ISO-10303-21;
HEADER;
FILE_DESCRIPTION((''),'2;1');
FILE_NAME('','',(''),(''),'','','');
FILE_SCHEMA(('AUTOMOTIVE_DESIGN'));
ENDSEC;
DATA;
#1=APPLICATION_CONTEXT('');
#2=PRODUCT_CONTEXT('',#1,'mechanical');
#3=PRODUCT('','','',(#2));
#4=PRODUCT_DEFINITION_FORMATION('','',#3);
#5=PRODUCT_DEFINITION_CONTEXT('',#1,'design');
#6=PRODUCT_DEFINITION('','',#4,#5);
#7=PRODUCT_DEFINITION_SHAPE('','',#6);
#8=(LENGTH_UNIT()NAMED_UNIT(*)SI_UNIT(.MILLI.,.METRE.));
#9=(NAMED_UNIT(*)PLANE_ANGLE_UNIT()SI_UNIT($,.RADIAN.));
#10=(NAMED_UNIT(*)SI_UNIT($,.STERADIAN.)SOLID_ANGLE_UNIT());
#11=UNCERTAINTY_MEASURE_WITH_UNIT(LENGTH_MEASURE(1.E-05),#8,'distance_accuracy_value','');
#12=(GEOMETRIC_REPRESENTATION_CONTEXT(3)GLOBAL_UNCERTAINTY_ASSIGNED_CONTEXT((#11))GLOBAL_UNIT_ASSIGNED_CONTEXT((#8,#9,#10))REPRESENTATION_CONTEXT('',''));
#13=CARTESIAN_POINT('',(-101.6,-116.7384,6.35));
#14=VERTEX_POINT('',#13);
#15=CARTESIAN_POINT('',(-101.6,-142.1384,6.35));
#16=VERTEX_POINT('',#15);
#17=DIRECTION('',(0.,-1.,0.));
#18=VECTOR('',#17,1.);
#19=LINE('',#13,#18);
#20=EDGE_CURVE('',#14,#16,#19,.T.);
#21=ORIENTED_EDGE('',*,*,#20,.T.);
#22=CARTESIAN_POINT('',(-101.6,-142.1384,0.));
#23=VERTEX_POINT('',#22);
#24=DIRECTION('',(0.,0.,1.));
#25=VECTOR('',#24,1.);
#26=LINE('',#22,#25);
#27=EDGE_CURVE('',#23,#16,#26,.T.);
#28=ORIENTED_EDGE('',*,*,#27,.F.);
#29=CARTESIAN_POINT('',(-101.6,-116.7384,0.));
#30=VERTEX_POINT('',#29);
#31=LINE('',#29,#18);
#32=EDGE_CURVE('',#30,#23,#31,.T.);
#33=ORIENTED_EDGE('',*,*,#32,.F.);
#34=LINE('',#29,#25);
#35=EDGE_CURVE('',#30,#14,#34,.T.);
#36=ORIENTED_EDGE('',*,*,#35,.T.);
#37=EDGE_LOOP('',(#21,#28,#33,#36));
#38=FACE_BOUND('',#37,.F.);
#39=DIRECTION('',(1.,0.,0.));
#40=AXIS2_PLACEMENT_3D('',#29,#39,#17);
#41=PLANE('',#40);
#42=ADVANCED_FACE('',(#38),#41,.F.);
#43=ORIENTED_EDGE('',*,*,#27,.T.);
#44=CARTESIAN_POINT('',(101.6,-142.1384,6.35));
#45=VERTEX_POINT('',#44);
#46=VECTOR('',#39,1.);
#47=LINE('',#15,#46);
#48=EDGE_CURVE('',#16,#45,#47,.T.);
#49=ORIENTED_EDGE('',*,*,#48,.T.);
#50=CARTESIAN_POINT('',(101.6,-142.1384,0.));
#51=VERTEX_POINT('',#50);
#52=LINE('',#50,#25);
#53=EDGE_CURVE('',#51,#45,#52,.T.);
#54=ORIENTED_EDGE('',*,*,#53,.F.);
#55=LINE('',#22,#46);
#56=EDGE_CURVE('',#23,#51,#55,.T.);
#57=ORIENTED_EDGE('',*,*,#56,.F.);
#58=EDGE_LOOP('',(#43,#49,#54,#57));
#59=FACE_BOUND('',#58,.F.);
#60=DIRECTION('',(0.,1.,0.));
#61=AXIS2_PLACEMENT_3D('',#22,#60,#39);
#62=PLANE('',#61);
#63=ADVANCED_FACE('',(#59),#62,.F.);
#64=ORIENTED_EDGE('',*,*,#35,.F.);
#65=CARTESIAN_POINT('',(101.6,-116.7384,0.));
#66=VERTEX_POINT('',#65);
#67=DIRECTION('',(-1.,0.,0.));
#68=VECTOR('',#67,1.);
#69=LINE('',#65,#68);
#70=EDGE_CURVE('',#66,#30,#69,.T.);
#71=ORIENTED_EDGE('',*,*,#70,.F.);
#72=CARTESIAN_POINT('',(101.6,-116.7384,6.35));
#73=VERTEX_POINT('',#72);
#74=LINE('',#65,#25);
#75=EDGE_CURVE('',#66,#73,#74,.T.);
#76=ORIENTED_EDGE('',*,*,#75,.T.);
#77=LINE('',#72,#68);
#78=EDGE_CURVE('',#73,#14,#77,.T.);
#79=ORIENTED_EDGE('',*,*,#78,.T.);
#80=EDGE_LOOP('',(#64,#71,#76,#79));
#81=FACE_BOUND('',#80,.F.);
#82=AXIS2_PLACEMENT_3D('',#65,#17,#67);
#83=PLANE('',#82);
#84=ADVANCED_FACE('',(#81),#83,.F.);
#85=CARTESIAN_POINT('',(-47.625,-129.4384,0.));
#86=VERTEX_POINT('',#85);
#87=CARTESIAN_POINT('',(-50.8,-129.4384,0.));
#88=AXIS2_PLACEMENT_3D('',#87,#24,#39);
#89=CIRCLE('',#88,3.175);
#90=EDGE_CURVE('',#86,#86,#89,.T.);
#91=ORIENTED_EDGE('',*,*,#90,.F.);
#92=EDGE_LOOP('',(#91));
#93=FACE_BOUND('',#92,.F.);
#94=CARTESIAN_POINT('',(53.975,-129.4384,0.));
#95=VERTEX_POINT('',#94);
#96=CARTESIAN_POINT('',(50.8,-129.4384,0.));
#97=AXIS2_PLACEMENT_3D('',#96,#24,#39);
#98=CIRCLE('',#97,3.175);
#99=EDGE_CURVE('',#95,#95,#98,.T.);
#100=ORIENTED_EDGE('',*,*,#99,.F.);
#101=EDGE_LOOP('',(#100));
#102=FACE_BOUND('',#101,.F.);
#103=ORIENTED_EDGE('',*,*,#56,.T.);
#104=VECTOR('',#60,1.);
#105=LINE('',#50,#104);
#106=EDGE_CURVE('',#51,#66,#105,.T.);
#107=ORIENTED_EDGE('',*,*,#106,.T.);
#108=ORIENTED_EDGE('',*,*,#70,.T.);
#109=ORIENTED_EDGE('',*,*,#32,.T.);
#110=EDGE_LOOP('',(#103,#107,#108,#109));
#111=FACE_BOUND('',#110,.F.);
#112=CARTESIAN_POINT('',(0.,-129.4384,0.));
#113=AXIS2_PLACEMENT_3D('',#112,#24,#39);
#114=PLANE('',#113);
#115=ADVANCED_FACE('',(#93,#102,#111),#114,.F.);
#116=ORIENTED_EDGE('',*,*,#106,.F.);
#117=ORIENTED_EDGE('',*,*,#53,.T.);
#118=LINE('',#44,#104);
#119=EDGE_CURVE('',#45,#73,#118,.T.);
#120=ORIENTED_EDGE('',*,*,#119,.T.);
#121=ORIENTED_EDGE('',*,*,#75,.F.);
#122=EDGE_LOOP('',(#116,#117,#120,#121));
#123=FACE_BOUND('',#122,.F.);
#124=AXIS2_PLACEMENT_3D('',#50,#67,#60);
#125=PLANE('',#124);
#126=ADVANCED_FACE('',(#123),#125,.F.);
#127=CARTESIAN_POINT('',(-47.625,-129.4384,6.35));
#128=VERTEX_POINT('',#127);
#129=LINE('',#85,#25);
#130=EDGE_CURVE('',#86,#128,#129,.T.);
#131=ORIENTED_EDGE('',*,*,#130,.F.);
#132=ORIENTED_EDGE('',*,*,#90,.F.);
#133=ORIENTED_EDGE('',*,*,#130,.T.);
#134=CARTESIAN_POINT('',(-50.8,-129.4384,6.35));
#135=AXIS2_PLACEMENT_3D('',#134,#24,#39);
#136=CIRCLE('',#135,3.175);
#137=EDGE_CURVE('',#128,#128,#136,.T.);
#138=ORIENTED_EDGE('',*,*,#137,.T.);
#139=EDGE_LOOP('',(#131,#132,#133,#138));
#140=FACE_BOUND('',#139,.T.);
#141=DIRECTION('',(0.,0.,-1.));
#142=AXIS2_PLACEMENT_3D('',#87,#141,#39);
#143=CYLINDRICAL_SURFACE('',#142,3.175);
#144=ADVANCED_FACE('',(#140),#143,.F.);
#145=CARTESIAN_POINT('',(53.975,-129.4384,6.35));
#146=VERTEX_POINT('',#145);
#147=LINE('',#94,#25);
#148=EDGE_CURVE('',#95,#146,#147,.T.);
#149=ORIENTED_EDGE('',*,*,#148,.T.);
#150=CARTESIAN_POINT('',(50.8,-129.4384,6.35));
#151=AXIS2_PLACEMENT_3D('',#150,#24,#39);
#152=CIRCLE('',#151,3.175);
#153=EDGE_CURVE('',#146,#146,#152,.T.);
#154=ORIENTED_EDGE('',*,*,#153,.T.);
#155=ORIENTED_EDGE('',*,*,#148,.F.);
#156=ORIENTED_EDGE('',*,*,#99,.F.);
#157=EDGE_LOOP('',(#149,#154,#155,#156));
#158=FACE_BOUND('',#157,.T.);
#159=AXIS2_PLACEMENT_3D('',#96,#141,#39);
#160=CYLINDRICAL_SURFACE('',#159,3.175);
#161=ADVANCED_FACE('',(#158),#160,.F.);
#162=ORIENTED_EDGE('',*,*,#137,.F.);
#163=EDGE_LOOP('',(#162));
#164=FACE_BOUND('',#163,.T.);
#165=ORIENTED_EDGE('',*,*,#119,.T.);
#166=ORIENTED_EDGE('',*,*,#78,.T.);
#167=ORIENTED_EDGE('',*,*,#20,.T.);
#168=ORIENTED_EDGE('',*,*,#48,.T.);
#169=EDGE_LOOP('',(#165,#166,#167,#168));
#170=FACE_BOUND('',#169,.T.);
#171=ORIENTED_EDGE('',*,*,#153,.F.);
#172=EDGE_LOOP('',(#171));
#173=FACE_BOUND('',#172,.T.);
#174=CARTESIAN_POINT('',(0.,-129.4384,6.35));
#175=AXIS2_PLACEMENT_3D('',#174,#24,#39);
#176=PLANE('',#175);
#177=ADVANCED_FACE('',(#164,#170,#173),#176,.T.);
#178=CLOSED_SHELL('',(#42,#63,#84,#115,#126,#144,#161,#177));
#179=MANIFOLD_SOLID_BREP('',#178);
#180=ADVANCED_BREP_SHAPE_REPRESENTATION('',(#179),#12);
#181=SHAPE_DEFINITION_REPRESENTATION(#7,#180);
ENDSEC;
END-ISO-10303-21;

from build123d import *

# Parameters (mm, degrees)
F0_R     = 3.175
F1_DEPTH = 6.35


# Not quite as in the source:
# - a feature names something its author has since deleted; it is built from what else it names


with BuildPart() as f1:
    # F0 (on Top) → F1 (new body)
    with BuildSketch(Plane.XY):
        Polygon((88.9, -116.7384), (76.2, -116.7384), (-76.2, -116.7384), (-101.6, -116.7384), (-101.6, -142.1384), (101.6, -142.1384), (101.6, -116.7384), align=None)
        with Locations((-50.8, -129.4384)):
            Circle(F0_R, mode=Mode.SUBTRACT)
        with Locations((50.8, -129.4384)):
            Circle(F0_R, mode=Mode.SUBTRACT)
    extrude(amount=F1_DEPTH)


solid = f1.part
